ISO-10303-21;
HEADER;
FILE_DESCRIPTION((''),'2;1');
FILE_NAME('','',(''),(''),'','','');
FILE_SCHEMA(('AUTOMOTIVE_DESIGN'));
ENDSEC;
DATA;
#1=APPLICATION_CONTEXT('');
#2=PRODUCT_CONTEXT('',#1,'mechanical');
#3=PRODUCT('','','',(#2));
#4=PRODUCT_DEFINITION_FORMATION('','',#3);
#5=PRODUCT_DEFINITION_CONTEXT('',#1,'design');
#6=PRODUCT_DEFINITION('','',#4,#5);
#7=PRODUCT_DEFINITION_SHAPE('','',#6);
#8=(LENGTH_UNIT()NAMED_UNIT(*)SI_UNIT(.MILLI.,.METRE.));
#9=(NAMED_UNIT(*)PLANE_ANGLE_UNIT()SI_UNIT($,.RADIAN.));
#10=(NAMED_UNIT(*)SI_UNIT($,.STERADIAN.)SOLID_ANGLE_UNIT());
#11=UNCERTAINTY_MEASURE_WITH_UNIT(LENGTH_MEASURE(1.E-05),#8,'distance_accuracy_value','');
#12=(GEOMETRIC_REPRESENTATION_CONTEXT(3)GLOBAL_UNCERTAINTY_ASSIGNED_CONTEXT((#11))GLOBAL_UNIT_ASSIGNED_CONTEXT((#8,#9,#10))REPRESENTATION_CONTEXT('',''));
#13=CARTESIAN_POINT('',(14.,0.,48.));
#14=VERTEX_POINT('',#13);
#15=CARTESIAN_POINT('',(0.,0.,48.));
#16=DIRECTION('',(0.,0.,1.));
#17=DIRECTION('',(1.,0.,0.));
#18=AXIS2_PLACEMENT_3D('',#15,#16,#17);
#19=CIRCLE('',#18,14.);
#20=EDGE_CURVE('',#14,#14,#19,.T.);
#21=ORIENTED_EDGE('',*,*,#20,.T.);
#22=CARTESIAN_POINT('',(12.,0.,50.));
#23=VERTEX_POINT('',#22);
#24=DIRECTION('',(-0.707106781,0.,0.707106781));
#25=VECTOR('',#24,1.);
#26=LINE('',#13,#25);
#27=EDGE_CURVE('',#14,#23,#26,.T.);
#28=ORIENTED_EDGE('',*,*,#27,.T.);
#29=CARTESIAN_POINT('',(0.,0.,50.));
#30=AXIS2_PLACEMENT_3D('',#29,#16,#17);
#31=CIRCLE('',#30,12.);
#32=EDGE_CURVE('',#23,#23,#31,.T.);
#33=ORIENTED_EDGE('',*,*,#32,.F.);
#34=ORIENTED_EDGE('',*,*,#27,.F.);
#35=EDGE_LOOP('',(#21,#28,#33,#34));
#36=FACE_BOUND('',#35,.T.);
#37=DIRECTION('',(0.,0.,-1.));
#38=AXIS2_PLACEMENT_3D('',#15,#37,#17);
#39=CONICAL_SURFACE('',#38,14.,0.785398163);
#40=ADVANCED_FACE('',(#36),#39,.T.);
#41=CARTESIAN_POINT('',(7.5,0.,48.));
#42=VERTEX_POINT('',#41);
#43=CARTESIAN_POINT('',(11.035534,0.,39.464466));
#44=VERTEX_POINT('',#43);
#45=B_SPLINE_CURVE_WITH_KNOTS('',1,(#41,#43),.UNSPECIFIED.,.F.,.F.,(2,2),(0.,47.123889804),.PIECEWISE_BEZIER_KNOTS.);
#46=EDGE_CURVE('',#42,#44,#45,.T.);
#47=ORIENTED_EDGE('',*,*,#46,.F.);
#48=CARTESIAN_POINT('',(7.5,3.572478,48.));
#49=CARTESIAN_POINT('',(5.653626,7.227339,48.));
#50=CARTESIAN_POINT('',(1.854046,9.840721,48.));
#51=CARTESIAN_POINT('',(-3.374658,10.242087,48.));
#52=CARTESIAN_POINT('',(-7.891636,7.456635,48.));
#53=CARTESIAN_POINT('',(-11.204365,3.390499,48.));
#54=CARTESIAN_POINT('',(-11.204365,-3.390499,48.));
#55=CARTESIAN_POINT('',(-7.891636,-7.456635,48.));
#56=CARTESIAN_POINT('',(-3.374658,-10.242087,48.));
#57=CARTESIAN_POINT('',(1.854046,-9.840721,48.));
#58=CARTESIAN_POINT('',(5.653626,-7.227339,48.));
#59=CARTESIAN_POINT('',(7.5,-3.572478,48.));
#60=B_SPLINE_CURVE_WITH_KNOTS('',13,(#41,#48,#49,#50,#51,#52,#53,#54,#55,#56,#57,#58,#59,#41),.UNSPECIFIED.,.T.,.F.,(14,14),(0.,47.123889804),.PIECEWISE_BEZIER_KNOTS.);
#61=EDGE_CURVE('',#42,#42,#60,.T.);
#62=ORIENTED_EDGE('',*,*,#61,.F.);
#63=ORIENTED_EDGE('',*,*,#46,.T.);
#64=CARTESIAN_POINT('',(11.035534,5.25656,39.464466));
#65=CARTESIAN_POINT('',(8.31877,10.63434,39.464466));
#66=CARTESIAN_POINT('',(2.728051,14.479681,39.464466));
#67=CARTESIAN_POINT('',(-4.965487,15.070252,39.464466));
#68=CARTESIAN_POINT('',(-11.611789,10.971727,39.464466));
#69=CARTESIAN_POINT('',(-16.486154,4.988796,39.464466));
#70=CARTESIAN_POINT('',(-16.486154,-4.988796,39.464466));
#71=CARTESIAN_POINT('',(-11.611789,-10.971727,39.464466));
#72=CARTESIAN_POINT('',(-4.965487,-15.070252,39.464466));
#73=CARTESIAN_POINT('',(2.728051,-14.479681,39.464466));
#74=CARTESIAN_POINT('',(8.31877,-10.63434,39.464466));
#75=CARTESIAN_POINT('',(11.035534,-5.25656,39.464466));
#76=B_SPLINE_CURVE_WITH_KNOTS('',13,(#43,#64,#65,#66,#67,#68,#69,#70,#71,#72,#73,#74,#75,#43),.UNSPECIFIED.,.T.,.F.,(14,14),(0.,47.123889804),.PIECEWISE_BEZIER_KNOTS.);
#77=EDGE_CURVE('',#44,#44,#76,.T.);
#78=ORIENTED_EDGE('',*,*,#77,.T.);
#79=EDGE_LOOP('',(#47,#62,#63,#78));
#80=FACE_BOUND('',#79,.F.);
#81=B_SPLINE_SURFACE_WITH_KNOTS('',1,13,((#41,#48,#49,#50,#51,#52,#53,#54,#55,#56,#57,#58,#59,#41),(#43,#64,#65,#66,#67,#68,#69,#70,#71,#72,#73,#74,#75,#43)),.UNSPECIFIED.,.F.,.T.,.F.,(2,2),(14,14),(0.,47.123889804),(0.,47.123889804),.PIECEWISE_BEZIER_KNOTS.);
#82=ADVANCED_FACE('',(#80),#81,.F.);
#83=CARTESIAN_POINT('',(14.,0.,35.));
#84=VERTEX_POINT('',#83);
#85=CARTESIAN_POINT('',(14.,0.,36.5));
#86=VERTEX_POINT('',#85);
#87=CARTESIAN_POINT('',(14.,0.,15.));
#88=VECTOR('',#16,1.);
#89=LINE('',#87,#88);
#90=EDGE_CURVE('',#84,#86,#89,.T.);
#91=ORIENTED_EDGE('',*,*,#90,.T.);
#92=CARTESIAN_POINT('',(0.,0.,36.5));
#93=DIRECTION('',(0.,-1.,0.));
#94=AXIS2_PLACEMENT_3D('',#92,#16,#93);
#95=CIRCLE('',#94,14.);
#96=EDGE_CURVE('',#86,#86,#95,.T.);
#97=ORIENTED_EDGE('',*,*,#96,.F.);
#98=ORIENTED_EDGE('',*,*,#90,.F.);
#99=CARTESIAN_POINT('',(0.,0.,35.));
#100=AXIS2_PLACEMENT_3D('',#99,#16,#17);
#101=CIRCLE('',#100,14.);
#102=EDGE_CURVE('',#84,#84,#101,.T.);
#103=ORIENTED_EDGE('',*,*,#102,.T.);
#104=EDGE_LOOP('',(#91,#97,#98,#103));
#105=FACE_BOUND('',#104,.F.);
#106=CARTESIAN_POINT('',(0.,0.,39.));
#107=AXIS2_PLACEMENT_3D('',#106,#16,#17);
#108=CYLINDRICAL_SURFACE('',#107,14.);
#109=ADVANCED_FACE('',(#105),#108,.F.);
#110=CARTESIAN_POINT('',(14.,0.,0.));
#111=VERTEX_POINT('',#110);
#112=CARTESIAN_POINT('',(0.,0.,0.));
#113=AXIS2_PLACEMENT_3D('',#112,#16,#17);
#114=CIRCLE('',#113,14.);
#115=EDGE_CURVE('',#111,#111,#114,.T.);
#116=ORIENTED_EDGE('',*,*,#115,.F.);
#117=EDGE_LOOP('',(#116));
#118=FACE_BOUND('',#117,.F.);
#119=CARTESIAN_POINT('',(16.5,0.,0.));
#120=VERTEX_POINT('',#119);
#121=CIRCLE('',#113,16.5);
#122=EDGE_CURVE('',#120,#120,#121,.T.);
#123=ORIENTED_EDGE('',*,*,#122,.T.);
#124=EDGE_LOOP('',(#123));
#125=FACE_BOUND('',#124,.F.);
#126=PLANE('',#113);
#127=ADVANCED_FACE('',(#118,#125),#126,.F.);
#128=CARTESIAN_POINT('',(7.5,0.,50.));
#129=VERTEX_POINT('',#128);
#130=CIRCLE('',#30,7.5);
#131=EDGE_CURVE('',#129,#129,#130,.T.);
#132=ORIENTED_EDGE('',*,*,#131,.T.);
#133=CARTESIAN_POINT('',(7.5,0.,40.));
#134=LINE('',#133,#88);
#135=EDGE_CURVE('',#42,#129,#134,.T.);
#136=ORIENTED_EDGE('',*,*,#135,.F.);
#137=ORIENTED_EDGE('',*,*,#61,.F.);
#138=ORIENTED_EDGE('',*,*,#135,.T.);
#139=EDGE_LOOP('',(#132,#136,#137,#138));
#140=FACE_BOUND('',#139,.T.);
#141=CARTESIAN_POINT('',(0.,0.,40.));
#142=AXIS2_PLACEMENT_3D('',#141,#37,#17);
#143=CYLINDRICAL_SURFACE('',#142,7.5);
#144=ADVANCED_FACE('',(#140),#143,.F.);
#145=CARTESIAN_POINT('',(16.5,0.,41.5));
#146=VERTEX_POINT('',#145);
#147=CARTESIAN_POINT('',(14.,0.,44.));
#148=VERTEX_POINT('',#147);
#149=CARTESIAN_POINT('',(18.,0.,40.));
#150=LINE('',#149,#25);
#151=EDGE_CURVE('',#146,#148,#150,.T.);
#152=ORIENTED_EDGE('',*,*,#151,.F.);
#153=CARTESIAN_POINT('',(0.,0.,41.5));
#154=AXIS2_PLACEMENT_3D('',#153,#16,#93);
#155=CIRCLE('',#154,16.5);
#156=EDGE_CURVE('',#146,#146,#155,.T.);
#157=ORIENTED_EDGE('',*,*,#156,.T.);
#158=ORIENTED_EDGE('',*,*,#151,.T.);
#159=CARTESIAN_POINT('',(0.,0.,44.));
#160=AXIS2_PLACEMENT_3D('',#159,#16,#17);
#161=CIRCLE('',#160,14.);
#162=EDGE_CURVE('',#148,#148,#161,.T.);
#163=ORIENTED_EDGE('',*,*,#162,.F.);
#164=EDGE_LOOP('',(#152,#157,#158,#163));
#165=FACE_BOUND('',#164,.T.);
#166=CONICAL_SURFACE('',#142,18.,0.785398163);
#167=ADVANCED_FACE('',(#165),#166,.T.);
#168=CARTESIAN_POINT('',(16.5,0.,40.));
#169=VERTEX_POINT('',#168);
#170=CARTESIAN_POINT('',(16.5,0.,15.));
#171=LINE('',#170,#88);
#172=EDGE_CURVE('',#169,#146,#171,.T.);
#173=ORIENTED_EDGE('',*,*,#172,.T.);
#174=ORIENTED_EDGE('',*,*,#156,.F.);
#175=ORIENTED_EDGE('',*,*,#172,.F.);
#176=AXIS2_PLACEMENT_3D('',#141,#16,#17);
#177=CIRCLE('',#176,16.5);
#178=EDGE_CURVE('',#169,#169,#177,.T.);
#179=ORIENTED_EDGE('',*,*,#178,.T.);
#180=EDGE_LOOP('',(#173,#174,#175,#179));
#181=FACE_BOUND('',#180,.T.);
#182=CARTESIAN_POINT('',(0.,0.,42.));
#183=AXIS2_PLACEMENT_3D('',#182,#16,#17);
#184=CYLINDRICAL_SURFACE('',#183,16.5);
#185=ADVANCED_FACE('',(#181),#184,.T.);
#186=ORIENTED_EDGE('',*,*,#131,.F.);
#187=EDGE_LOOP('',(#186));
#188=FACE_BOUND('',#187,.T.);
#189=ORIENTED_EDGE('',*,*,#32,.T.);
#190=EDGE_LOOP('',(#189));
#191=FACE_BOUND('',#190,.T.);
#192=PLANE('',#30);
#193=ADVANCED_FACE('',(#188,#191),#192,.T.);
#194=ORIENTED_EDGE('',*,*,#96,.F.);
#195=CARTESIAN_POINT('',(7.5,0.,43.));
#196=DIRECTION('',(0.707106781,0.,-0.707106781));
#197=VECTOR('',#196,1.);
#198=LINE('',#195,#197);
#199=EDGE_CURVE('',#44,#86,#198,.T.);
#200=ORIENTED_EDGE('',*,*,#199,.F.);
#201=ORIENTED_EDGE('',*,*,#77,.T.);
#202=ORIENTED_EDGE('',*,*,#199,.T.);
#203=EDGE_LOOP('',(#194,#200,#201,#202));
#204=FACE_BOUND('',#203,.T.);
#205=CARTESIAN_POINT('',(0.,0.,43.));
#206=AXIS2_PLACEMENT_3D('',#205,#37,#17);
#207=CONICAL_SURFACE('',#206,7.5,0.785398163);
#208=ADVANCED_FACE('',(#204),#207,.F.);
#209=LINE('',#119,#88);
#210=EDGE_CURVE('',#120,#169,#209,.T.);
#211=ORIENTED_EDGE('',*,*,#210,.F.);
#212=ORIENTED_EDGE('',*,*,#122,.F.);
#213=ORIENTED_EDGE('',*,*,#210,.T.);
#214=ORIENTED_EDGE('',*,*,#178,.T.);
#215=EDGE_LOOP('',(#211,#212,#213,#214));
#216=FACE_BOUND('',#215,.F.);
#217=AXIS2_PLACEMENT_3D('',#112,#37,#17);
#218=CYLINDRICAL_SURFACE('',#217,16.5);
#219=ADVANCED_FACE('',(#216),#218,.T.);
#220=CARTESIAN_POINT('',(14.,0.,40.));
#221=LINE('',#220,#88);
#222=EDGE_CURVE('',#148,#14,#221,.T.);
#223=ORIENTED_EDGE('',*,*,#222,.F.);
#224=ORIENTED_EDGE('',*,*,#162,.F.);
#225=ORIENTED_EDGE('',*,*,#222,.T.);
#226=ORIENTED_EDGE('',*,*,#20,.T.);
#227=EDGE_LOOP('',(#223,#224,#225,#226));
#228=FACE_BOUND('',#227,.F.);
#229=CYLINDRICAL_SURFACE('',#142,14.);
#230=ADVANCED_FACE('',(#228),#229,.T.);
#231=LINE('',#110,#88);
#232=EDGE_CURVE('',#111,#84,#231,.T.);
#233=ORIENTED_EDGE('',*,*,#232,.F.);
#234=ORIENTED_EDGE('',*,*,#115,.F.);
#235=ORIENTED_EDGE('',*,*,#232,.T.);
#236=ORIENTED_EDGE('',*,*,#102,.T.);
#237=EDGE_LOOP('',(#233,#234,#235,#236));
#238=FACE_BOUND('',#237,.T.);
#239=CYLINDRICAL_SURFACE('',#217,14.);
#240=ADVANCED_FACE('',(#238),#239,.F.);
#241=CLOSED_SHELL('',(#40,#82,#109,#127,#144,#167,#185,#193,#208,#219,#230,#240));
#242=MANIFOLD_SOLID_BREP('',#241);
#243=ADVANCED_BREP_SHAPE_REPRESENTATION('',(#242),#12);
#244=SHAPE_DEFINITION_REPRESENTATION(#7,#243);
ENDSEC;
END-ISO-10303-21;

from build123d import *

# Parameters (mm, degrees)
F0_R          = 16.5
F0_R_2        = 14
F1_DEPTH      = 40
F2_R          = 14
F2_R_2        = 7.5
F3_DEPTH      = 10
F3_DEPTH_BACK = 5
F4_S5_R       = 16.5
F4_T6_DEPTH   = 27
F5_SIZE       = 2
F6_S5_R       = 14
F6_T6_DEPTH   = 24
F7_SIZE       = 5


# Not quite as in the source:
# - a fillet or chamfer that OpenCascade refuses, or shapes differently, is made with other operations: its cross-section is extruded or revolved along the edge and cut away or added


with BuildPart() as f1:
    # F0 (on Top) → F1 (new body)
    with BuildSketch(Plane.XY):
        Circle(F0_R)
        Circle(F0_R_2, mode=Mode.SUBTRACT)
    extrude(amount=F1_DEPTH)

    # F2 (on face) → F3 (join, two sides)
    with BuildSketch(Plane.XY.offset(40)) as f3_sk:
        Circle(F2_R)
        Circle(F2_R_2, mode=Mode.SUBTRACT)
    extrude(amount=F3_DEPTH)
    extrude(f3_sk.sketch, amount=-F3_DEPTH_BACK)

    # F4: chamfer of 4 on 1 edges, made by hand


with BuildPart() as f4_tool2:
    # F4_s3 → F4_t4 (revolve)
    with BuildSketch(Plane.XZ):
        Polygon((18, 40), (14, 44), (14, 40), align=None)
    revolve(axis=Axis((0, 0, 40), (0, 0, 1)))

    # F4_s5 → F4_t6 (intersect, symmetric)
    with BuildSketch(Plane.XY.offset(42)):
        Circle(F4_S5_R)
    extrude(amount=F4_T6_DEPTH, both=True, mode=Mode.INTERSECT)


with BuildPart() as f1_1:
    add(f1.part)

    # F4_t1: union F4_tool2
    add(f4_tool2.part)

    # F5
    f5_edges = [f1_1.edges().sort_by_distance(p)[0] for p in [
        (-14, 0, 50),
    ]]
    chamfer(f5_edges, length=F5_SIZE)

    # F6: chamfer of 8 on 1 edges, made by hand


with BuildPart() as f6_tool2:
    # F6_s3 → F6_t4 (revolve)
    with BuildSketch(Plane.XZ):
        Polygon((7.5, 43), (15.5, 35), (7.5, 35), align=None)
    revolve(axis=Axis((0, 0, 35), (0, 0, 1)))

    # F6_s5 → F6_t6 (intersect, symmetric)
    with BuildSketch(Plane.XY.offset(39)):
        Circle(F6_S5_R)
    extrude(amount=F6_T6_DEPTH, both=True, mode=Mode.INTERSECT)


with BuildPart() as f1_2:
    add(f1_1.part)

    # F6_t1: cut F6_tool2
    add(f6_tool2.part, mode=Mode.SUBTRACT)

    # F7
    f7_edges = [f1_2.edges().sort_by_distance(p)[0] for p in [
        (-7.5, 0, 43),
    ]]
    chamfer(f7_edges, length=F7_SIZE)


solid = f1_2.part
